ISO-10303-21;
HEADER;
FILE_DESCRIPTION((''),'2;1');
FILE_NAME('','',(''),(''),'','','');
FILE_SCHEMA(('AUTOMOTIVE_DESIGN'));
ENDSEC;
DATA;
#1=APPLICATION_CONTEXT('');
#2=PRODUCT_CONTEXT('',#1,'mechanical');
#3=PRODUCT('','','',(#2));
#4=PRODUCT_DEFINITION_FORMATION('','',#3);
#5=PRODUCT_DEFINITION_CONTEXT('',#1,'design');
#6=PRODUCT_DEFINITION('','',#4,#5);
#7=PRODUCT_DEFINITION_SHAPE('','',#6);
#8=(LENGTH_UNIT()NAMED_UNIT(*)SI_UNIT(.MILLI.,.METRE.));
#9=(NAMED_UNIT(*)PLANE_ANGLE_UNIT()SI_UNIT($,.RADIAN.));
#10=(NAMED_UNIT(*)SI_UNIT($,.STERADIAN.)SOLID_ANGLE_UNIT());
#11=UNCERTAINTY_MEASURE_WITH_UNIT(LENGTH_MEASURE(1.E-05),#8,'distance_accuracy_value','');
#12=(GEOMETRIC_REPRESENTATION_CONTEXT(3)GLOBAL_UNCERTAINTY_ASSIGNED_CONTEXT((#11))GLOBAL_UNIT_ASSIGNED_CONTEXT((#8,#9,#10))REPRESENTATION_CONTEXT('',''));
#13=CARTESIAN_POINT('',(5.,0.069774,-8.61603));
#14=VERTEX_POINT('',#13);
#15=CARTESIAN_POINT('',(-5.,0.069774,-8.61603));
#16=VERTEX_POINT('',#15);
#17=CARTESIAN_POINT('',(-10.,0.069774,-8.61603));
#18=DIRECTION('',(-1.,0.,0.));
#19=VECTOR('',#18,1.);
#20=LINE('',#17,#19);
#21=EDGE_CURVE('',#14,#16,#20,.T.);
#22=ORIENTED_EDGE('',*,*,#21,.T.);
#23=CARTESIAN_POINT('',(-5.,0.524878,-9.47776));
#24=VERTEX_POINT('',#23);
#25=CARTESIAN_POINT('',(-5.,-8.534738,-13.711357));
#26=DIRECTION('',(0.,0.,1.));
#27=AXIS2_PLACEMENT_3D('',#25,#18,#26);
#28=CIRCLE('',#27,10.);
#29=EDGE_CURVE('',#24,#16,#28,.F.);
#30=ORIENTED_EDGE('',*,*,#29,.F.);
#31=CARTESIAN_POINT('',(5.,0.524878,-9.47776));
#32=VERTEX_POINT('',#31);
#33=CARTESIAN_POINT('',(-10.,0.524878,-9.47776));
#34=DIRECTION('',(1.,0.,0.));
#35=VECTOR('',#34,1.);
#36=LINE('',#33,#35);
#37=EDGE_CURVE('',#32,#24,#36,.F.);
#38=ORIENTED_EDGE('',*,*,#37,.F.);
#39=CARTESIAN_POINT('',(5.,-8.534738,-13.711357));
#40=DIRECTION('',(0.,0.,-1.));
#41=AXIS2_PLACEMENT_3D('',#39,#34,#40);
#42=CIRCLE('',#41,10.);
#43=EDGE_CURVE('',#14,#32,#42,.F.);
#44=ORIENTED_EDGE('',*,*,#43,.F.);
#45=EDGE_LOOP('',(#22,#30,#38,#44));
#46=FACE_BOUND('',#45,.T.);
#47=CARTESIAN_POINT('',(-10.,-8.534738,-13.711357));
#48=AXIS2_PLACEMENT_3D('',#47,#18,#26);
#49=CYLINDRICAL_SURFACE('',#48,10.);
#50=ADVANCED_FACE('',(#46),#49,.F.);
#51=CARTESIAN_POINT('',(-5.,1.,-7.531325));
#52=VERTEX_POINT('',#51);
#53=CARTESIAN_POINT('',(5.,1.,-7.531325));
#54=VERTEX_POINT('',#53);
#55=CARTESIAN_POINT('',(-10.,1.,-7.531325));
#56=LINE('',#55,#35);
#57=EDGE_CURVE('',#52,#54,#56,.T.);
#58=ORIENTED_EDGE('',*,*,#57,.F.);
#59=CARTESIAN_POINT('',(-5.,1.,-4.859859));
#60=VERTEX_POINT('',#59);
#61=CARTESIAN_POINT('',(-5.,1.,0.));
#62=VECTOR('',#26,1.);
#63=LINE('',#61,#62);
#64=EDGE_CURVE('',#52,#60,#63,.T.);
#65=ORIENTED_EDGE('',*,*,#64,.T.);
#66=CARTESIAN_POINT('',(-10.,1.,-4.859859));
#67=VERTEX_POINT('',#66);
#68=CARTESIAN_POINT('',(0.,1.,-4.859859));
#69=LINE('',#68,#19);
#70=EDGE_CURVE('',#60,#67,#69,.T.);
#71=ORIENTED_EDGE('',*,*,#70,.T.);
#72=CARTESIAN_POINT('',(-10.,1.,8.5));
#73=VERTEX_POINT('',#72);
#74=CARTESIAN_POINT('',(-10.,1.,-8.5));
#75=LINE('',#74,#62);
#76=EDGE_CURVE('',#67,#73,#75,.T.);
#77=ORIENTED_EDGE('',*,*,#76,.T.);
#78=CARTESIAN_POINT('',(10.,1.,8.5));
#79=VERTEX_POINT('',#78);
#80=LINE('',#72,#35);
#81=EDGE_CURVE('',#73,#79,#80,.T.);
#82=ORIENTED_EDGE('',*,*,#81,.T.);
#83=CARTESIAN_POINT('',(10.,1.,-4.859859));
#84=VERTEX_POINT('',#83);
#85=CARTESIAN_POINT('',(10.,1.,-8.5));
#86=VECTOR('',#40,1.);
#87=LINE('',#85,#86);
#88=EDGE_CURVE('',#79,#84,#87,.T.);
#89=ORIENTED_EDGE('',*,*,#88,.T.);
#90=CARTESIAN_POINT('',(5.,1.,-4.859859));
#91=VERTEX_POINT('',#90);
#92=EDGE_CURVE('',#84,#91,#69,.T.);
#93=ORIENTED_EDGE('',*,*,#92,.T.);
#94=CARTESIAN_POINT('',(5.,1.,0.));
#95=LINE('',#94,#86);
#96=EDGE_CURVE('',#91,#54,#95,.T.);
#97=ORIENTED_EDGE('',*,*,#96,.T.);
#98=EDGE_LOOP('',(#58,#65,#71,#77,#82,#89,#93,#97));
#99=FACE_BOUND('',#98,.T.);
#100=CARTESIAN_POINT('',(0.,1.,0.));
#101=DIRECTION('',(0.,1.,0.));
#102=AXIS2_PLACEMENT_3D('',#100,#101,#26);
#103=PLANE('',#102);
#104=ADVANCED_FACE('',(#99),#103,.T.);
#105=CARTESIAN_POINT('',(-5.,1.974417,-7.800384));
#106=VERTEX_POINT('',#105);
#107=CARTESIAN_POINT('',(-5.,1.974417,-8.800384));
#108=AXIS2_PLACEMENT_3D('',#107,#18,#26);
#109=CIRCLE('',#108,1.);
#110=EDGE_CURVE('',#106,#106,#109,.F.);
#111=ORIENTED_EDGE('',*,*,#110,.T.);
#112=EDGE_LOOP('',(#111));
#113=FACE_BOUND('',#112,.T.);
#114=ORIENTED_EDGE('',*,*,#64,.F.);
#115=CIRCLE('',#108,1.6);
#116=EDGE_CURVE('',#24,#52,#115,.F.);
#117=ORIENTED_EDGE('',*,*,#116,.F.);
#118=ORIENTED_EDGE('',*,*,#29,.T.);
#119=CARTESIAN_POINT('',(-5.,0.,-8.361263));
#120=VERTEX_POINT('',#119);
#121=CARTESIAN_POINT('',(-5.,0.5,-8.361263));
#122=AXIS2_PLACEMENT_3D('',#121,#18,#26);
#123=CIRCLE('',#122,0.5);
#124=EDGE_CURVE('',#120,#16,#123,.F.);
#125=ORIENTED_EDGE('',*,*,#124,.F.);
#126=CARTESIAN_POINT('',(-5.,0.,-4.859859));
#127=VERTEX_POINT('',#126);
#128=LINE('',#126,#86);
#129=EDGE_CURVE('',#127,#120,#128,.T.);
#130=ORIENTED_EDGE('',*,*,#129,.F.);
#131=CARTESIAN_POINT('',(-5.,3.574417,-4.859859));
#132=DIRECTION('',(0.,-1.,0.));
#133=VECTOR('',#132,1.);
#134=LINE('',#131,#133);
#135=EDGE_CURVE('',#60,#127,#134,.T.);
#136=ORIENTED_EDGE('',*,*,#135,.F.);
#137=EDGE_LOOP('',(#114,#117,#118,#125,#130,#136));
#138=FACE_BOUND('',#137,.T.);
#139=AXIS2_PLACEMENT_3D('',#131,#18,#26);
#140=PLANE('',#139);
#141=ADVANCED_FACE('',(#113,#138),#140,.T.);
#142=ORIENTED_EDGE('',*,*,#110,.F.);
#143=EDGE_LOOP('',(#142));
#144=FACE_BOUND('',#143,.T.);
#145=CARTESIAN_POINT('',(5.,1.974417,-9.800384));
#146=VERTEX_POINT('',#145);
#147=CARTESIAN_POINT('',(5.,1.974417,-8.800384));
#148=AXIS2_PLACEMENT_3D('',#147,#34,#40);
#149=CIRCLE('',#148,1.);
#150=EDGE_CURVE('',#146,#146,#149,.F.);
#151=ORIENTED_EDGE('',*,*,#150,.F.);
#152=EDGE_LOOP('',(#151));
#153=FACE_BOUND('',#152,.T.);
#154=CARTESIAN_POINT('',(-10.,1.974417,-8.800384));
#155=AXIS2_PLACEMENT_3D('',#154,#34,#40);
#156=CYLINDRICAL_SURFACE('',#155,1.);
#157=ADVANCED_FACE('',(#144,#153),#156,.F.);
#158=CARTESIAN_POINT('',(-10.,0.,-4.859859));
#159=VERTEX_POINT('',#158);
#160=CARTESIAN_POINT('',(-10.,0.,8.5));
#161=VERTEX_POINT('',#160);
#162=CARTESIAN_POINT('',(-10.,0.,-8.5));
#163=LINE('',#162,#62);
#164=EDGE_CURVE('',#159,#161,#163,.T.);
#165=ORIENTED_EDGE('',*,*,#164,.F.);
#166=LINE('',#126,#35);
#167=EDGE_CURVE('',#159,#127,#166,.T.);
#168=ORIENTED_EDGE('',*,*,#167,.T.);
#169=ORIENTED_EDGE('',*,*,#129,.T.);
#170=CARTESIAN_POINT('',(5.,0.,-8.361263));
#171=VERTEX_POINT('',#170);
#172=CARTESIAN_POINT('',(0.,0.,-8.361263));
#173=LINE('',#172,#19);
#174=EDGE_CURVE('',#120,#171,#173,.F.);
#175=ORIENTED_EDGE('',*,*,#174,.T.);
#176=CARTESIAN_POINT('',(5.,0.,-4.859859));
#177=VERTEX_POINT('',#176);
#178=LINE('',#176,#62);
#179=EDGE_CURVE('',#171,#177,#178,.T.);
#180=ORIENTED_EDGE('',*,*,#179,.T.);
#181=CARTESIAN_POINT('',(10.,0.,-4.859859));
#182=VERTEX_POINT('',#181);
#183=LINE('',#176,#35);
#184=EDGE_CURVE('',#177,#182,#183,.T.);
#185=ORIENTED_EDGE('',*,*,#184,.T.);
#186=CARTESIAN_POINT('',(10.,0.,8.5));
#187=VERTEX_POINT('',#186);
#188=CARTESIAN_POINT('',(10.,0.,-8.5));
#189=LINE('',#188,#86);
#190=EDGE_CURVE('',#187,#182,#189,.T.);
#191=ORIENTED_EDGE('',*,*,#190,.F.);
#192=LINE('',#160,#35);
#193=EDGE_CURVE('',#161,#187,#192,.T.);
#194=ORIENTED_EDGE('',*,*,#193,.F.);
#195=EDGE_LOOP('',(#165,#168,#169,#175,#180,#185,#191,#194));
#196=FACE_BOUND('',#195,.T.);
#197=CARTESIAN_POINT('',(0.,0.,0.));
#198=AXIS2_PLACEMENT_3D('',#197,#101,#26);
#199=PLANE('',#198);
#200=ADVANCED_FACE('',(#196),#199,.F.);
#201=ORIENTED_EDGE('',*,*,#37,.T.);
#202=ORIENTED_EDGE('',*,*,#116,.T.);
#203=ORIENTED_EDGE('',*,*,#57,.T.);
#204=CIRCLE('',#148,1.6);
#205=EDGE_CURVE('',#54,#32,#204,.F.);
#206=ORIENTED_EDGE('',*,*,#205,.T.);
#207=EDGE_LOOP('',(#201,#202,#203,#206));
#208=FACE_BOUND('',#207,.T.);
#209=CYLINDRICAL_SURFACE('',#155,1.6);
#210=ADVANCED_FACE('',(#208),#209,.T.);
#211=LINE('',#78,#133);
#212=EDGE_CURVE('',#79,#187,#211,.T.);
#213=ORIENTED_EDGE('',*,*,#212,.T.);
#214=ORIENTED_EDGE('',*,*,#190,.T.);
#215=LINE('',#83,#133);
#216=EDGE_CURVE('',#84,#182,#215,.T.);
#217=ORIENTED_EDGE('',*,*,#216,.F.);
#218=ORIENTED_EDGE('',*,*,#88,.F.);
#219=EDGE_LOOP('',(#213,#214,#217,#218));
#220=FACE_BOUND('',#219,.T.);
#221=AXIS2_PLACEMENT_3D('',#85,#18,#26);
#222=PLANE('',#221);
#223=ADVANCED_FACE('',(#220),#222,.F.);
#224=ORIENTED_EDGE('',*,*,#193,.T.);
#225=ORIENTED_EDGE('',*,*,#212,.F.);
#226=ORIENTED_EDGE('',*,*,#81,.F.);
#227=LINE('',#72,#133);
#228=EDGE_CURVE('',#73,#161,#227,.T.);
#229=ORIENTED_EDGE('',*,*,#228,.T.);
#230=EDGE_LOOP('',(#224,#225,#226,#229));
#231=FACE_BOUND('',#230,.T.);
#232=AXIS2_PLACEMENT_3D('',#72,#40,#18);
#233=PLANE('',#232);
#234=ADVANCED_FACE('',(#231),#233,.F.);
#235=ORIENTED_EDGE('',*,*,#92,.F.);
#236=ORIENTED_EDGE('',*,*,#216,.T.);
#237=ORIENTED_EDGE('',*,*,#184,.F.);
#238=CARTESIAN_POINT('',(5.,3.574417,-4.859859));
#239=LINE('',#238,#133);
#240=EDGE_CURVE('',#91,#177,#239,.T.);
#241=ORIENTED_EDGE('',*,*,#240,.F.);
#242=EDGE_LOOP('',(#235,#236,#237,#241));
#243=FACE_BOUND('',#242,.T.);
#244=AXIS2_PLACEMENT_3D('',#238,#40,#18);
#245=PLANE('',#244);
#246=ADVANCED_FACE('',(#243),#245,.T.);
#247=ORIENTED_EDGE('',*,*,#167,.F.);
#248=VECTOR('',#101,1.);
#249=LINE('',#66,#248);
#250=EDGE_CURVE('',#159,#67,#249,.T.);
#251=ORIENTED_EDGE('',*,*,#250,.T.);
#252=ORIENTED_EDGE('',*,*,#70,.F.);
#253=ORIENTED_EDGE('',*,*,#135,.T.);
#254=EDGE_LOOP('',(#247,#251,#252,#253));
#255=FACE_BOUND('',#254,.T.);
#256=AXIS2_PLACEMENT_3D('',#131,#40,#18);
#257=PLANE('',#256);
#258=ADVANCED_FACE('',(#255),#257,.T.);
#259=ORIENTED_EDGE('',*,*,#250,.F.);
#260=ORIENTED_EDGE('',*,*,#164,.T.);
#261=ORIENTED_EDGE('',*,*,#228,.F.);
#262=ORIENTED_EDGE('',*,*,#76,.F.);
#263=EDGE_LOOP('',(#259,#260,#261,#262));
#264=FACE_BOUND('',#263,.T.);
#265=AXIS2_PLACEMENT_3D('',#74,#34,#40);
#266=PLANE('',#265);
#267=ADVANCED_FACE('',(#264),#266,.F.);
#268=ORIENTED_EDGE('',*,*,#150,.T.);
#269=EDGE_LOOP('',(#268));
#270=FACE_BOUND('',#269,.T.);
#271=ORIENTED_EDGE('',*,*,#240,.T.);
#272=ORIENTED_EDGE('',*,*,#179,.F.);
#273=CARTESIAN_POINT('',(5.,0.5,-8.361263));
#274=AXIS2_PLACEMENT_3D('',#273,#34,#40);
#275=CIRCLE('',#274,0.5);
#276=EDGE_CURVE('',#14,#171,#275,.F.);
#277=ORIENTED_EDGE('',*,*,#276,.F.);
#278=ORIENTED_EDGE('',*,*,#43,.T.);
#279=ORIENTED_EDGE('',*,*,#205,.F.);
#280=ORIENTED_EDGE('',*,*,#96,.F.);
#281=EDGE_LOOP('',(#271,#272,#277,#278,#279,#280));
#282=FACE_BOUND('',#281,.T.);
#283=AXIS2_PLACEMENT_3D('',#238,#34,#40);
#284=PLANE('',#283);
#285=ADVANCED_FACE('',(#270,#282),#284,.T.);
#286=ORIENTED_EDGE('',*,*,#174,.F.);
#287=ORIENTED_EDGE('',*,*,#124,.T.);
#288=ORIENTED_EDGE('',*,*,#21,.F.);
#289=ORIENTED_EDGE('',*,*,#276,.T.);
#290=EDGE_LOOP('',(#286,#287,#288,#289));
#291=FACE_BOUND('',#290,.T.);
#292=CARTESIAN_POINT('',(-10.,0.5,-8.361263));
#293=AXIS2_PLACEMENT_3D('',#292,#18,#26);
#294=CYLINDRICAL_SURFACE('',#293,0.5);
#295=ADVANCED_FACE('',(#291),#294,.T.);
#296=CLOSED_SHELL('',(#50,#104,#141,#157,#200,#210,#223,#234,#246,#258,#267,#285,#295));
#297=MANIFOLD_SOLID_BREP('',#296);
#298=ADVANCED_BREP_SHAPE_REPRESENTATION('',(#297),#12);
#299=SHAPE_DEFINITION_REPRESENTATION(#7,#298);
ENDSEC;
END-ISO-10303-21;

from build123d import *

# Parameters (mm, degrees)
SKETCH1_W           = 20
SKETCH1_H           = 17
BOSS_EXTRUDE1_DEPTH = 1
SKETCH2_R           = 1.6
SKETCH2_R_2         = 1
BOSS_EXTRUDE2_DEPTH = 20
FILLET1_R           = 10
FILLET2_R           = 0.5
SKETCH4_W           = 10
SKETCH4_H           = 12
CUT_EXTRUDE3_DEPTH  = 15.86420015


with BuildPart() as part:
    # Sketch1 → Boss-Extrude1 (new body)
    with BuildSketch(Plane(origin=(0, 0, 0), x_dir=(1, 0, 0), z_dir=(0, 1, 0))):
        Rectangle(SKETCH1_W, SKETCH1_H)
    extrude(amount=BOSS_EXTRUDE1_DEPTH)

    # Sketch2 → Boss-Extrude2 (add)
    with BuildSketch(Plane(origin=(10, 0, 0), x_dir=(0, 0, -1), z_dir=(1, 0, 0))):
        with Locations((8.800384095, 1.974416987)):
            Circle(SKETCH2_R)
        with Locations((8.800384095, 1.974416987)):
            Circle(SKETCH2_R_2, mode=Mode.SUBTRACT)
    extrude(amount=-BOSS_EXTRUDE2_DEPTH)

    # Fillet1
    # the kernel refuses this fillet: 10 mm, written as the material it adds along each edge
    with BuildSketch(Plane(origin=(-10, 0.402866989, -8.5), x_dir=(0, -1, 0), z_dir=(1, 0, 0))) as fillet1_piece_1:
        with BuildLine():
            CenterArc((8.937605274, 5.21135706), FILLET1_R, 205.046884286, 6.361578996)
            Line((-0.12201134, 0.977759676), (-0.303203672, 0.893087728))
            ThreePointArc((-0.303203672, 0.893087728), (-0.18232452, 0.473740867), (-0.19644375, 0.037548012))
            Line((-0.19644375, 0.037548012), (0, -0.2))
            ThreePointArc((0, -0.2), (0.201433495, -0.2), (0.232172223, -0.104227141))
            Line((0.232172223, -0.104227141), (0.402866989, 0))
        make_face()
    extrude(amount=20)

    # Fillet2
    fillet2_edges = [part.edges().sort_by_distance(p)[0] for p in [
        (0, 0, -8.5),
    ]]
    fillet(fillet2_edges, radius=FILLET2_R)

    # Sketch4 → Cut-Extrude3 (cut, through all)
    with BuildSketch(Plane(origin=(0, 0, 0), x_dir=(1, 0, 0), z_dir=(0, 1, 0))):
        with Locations((10, 10.859859008)):
            Rectangle(SKETCH4_W, SKETCH4_H)
        with Locations((-10, 10.859859008)):
            Rectangle(SKETCH4_W, SKETCH4_H)
    extrude(amount=CUT_EXTRUDE3_DEPTH, mode=Mode.SUBTRACT)


solid = part.part
